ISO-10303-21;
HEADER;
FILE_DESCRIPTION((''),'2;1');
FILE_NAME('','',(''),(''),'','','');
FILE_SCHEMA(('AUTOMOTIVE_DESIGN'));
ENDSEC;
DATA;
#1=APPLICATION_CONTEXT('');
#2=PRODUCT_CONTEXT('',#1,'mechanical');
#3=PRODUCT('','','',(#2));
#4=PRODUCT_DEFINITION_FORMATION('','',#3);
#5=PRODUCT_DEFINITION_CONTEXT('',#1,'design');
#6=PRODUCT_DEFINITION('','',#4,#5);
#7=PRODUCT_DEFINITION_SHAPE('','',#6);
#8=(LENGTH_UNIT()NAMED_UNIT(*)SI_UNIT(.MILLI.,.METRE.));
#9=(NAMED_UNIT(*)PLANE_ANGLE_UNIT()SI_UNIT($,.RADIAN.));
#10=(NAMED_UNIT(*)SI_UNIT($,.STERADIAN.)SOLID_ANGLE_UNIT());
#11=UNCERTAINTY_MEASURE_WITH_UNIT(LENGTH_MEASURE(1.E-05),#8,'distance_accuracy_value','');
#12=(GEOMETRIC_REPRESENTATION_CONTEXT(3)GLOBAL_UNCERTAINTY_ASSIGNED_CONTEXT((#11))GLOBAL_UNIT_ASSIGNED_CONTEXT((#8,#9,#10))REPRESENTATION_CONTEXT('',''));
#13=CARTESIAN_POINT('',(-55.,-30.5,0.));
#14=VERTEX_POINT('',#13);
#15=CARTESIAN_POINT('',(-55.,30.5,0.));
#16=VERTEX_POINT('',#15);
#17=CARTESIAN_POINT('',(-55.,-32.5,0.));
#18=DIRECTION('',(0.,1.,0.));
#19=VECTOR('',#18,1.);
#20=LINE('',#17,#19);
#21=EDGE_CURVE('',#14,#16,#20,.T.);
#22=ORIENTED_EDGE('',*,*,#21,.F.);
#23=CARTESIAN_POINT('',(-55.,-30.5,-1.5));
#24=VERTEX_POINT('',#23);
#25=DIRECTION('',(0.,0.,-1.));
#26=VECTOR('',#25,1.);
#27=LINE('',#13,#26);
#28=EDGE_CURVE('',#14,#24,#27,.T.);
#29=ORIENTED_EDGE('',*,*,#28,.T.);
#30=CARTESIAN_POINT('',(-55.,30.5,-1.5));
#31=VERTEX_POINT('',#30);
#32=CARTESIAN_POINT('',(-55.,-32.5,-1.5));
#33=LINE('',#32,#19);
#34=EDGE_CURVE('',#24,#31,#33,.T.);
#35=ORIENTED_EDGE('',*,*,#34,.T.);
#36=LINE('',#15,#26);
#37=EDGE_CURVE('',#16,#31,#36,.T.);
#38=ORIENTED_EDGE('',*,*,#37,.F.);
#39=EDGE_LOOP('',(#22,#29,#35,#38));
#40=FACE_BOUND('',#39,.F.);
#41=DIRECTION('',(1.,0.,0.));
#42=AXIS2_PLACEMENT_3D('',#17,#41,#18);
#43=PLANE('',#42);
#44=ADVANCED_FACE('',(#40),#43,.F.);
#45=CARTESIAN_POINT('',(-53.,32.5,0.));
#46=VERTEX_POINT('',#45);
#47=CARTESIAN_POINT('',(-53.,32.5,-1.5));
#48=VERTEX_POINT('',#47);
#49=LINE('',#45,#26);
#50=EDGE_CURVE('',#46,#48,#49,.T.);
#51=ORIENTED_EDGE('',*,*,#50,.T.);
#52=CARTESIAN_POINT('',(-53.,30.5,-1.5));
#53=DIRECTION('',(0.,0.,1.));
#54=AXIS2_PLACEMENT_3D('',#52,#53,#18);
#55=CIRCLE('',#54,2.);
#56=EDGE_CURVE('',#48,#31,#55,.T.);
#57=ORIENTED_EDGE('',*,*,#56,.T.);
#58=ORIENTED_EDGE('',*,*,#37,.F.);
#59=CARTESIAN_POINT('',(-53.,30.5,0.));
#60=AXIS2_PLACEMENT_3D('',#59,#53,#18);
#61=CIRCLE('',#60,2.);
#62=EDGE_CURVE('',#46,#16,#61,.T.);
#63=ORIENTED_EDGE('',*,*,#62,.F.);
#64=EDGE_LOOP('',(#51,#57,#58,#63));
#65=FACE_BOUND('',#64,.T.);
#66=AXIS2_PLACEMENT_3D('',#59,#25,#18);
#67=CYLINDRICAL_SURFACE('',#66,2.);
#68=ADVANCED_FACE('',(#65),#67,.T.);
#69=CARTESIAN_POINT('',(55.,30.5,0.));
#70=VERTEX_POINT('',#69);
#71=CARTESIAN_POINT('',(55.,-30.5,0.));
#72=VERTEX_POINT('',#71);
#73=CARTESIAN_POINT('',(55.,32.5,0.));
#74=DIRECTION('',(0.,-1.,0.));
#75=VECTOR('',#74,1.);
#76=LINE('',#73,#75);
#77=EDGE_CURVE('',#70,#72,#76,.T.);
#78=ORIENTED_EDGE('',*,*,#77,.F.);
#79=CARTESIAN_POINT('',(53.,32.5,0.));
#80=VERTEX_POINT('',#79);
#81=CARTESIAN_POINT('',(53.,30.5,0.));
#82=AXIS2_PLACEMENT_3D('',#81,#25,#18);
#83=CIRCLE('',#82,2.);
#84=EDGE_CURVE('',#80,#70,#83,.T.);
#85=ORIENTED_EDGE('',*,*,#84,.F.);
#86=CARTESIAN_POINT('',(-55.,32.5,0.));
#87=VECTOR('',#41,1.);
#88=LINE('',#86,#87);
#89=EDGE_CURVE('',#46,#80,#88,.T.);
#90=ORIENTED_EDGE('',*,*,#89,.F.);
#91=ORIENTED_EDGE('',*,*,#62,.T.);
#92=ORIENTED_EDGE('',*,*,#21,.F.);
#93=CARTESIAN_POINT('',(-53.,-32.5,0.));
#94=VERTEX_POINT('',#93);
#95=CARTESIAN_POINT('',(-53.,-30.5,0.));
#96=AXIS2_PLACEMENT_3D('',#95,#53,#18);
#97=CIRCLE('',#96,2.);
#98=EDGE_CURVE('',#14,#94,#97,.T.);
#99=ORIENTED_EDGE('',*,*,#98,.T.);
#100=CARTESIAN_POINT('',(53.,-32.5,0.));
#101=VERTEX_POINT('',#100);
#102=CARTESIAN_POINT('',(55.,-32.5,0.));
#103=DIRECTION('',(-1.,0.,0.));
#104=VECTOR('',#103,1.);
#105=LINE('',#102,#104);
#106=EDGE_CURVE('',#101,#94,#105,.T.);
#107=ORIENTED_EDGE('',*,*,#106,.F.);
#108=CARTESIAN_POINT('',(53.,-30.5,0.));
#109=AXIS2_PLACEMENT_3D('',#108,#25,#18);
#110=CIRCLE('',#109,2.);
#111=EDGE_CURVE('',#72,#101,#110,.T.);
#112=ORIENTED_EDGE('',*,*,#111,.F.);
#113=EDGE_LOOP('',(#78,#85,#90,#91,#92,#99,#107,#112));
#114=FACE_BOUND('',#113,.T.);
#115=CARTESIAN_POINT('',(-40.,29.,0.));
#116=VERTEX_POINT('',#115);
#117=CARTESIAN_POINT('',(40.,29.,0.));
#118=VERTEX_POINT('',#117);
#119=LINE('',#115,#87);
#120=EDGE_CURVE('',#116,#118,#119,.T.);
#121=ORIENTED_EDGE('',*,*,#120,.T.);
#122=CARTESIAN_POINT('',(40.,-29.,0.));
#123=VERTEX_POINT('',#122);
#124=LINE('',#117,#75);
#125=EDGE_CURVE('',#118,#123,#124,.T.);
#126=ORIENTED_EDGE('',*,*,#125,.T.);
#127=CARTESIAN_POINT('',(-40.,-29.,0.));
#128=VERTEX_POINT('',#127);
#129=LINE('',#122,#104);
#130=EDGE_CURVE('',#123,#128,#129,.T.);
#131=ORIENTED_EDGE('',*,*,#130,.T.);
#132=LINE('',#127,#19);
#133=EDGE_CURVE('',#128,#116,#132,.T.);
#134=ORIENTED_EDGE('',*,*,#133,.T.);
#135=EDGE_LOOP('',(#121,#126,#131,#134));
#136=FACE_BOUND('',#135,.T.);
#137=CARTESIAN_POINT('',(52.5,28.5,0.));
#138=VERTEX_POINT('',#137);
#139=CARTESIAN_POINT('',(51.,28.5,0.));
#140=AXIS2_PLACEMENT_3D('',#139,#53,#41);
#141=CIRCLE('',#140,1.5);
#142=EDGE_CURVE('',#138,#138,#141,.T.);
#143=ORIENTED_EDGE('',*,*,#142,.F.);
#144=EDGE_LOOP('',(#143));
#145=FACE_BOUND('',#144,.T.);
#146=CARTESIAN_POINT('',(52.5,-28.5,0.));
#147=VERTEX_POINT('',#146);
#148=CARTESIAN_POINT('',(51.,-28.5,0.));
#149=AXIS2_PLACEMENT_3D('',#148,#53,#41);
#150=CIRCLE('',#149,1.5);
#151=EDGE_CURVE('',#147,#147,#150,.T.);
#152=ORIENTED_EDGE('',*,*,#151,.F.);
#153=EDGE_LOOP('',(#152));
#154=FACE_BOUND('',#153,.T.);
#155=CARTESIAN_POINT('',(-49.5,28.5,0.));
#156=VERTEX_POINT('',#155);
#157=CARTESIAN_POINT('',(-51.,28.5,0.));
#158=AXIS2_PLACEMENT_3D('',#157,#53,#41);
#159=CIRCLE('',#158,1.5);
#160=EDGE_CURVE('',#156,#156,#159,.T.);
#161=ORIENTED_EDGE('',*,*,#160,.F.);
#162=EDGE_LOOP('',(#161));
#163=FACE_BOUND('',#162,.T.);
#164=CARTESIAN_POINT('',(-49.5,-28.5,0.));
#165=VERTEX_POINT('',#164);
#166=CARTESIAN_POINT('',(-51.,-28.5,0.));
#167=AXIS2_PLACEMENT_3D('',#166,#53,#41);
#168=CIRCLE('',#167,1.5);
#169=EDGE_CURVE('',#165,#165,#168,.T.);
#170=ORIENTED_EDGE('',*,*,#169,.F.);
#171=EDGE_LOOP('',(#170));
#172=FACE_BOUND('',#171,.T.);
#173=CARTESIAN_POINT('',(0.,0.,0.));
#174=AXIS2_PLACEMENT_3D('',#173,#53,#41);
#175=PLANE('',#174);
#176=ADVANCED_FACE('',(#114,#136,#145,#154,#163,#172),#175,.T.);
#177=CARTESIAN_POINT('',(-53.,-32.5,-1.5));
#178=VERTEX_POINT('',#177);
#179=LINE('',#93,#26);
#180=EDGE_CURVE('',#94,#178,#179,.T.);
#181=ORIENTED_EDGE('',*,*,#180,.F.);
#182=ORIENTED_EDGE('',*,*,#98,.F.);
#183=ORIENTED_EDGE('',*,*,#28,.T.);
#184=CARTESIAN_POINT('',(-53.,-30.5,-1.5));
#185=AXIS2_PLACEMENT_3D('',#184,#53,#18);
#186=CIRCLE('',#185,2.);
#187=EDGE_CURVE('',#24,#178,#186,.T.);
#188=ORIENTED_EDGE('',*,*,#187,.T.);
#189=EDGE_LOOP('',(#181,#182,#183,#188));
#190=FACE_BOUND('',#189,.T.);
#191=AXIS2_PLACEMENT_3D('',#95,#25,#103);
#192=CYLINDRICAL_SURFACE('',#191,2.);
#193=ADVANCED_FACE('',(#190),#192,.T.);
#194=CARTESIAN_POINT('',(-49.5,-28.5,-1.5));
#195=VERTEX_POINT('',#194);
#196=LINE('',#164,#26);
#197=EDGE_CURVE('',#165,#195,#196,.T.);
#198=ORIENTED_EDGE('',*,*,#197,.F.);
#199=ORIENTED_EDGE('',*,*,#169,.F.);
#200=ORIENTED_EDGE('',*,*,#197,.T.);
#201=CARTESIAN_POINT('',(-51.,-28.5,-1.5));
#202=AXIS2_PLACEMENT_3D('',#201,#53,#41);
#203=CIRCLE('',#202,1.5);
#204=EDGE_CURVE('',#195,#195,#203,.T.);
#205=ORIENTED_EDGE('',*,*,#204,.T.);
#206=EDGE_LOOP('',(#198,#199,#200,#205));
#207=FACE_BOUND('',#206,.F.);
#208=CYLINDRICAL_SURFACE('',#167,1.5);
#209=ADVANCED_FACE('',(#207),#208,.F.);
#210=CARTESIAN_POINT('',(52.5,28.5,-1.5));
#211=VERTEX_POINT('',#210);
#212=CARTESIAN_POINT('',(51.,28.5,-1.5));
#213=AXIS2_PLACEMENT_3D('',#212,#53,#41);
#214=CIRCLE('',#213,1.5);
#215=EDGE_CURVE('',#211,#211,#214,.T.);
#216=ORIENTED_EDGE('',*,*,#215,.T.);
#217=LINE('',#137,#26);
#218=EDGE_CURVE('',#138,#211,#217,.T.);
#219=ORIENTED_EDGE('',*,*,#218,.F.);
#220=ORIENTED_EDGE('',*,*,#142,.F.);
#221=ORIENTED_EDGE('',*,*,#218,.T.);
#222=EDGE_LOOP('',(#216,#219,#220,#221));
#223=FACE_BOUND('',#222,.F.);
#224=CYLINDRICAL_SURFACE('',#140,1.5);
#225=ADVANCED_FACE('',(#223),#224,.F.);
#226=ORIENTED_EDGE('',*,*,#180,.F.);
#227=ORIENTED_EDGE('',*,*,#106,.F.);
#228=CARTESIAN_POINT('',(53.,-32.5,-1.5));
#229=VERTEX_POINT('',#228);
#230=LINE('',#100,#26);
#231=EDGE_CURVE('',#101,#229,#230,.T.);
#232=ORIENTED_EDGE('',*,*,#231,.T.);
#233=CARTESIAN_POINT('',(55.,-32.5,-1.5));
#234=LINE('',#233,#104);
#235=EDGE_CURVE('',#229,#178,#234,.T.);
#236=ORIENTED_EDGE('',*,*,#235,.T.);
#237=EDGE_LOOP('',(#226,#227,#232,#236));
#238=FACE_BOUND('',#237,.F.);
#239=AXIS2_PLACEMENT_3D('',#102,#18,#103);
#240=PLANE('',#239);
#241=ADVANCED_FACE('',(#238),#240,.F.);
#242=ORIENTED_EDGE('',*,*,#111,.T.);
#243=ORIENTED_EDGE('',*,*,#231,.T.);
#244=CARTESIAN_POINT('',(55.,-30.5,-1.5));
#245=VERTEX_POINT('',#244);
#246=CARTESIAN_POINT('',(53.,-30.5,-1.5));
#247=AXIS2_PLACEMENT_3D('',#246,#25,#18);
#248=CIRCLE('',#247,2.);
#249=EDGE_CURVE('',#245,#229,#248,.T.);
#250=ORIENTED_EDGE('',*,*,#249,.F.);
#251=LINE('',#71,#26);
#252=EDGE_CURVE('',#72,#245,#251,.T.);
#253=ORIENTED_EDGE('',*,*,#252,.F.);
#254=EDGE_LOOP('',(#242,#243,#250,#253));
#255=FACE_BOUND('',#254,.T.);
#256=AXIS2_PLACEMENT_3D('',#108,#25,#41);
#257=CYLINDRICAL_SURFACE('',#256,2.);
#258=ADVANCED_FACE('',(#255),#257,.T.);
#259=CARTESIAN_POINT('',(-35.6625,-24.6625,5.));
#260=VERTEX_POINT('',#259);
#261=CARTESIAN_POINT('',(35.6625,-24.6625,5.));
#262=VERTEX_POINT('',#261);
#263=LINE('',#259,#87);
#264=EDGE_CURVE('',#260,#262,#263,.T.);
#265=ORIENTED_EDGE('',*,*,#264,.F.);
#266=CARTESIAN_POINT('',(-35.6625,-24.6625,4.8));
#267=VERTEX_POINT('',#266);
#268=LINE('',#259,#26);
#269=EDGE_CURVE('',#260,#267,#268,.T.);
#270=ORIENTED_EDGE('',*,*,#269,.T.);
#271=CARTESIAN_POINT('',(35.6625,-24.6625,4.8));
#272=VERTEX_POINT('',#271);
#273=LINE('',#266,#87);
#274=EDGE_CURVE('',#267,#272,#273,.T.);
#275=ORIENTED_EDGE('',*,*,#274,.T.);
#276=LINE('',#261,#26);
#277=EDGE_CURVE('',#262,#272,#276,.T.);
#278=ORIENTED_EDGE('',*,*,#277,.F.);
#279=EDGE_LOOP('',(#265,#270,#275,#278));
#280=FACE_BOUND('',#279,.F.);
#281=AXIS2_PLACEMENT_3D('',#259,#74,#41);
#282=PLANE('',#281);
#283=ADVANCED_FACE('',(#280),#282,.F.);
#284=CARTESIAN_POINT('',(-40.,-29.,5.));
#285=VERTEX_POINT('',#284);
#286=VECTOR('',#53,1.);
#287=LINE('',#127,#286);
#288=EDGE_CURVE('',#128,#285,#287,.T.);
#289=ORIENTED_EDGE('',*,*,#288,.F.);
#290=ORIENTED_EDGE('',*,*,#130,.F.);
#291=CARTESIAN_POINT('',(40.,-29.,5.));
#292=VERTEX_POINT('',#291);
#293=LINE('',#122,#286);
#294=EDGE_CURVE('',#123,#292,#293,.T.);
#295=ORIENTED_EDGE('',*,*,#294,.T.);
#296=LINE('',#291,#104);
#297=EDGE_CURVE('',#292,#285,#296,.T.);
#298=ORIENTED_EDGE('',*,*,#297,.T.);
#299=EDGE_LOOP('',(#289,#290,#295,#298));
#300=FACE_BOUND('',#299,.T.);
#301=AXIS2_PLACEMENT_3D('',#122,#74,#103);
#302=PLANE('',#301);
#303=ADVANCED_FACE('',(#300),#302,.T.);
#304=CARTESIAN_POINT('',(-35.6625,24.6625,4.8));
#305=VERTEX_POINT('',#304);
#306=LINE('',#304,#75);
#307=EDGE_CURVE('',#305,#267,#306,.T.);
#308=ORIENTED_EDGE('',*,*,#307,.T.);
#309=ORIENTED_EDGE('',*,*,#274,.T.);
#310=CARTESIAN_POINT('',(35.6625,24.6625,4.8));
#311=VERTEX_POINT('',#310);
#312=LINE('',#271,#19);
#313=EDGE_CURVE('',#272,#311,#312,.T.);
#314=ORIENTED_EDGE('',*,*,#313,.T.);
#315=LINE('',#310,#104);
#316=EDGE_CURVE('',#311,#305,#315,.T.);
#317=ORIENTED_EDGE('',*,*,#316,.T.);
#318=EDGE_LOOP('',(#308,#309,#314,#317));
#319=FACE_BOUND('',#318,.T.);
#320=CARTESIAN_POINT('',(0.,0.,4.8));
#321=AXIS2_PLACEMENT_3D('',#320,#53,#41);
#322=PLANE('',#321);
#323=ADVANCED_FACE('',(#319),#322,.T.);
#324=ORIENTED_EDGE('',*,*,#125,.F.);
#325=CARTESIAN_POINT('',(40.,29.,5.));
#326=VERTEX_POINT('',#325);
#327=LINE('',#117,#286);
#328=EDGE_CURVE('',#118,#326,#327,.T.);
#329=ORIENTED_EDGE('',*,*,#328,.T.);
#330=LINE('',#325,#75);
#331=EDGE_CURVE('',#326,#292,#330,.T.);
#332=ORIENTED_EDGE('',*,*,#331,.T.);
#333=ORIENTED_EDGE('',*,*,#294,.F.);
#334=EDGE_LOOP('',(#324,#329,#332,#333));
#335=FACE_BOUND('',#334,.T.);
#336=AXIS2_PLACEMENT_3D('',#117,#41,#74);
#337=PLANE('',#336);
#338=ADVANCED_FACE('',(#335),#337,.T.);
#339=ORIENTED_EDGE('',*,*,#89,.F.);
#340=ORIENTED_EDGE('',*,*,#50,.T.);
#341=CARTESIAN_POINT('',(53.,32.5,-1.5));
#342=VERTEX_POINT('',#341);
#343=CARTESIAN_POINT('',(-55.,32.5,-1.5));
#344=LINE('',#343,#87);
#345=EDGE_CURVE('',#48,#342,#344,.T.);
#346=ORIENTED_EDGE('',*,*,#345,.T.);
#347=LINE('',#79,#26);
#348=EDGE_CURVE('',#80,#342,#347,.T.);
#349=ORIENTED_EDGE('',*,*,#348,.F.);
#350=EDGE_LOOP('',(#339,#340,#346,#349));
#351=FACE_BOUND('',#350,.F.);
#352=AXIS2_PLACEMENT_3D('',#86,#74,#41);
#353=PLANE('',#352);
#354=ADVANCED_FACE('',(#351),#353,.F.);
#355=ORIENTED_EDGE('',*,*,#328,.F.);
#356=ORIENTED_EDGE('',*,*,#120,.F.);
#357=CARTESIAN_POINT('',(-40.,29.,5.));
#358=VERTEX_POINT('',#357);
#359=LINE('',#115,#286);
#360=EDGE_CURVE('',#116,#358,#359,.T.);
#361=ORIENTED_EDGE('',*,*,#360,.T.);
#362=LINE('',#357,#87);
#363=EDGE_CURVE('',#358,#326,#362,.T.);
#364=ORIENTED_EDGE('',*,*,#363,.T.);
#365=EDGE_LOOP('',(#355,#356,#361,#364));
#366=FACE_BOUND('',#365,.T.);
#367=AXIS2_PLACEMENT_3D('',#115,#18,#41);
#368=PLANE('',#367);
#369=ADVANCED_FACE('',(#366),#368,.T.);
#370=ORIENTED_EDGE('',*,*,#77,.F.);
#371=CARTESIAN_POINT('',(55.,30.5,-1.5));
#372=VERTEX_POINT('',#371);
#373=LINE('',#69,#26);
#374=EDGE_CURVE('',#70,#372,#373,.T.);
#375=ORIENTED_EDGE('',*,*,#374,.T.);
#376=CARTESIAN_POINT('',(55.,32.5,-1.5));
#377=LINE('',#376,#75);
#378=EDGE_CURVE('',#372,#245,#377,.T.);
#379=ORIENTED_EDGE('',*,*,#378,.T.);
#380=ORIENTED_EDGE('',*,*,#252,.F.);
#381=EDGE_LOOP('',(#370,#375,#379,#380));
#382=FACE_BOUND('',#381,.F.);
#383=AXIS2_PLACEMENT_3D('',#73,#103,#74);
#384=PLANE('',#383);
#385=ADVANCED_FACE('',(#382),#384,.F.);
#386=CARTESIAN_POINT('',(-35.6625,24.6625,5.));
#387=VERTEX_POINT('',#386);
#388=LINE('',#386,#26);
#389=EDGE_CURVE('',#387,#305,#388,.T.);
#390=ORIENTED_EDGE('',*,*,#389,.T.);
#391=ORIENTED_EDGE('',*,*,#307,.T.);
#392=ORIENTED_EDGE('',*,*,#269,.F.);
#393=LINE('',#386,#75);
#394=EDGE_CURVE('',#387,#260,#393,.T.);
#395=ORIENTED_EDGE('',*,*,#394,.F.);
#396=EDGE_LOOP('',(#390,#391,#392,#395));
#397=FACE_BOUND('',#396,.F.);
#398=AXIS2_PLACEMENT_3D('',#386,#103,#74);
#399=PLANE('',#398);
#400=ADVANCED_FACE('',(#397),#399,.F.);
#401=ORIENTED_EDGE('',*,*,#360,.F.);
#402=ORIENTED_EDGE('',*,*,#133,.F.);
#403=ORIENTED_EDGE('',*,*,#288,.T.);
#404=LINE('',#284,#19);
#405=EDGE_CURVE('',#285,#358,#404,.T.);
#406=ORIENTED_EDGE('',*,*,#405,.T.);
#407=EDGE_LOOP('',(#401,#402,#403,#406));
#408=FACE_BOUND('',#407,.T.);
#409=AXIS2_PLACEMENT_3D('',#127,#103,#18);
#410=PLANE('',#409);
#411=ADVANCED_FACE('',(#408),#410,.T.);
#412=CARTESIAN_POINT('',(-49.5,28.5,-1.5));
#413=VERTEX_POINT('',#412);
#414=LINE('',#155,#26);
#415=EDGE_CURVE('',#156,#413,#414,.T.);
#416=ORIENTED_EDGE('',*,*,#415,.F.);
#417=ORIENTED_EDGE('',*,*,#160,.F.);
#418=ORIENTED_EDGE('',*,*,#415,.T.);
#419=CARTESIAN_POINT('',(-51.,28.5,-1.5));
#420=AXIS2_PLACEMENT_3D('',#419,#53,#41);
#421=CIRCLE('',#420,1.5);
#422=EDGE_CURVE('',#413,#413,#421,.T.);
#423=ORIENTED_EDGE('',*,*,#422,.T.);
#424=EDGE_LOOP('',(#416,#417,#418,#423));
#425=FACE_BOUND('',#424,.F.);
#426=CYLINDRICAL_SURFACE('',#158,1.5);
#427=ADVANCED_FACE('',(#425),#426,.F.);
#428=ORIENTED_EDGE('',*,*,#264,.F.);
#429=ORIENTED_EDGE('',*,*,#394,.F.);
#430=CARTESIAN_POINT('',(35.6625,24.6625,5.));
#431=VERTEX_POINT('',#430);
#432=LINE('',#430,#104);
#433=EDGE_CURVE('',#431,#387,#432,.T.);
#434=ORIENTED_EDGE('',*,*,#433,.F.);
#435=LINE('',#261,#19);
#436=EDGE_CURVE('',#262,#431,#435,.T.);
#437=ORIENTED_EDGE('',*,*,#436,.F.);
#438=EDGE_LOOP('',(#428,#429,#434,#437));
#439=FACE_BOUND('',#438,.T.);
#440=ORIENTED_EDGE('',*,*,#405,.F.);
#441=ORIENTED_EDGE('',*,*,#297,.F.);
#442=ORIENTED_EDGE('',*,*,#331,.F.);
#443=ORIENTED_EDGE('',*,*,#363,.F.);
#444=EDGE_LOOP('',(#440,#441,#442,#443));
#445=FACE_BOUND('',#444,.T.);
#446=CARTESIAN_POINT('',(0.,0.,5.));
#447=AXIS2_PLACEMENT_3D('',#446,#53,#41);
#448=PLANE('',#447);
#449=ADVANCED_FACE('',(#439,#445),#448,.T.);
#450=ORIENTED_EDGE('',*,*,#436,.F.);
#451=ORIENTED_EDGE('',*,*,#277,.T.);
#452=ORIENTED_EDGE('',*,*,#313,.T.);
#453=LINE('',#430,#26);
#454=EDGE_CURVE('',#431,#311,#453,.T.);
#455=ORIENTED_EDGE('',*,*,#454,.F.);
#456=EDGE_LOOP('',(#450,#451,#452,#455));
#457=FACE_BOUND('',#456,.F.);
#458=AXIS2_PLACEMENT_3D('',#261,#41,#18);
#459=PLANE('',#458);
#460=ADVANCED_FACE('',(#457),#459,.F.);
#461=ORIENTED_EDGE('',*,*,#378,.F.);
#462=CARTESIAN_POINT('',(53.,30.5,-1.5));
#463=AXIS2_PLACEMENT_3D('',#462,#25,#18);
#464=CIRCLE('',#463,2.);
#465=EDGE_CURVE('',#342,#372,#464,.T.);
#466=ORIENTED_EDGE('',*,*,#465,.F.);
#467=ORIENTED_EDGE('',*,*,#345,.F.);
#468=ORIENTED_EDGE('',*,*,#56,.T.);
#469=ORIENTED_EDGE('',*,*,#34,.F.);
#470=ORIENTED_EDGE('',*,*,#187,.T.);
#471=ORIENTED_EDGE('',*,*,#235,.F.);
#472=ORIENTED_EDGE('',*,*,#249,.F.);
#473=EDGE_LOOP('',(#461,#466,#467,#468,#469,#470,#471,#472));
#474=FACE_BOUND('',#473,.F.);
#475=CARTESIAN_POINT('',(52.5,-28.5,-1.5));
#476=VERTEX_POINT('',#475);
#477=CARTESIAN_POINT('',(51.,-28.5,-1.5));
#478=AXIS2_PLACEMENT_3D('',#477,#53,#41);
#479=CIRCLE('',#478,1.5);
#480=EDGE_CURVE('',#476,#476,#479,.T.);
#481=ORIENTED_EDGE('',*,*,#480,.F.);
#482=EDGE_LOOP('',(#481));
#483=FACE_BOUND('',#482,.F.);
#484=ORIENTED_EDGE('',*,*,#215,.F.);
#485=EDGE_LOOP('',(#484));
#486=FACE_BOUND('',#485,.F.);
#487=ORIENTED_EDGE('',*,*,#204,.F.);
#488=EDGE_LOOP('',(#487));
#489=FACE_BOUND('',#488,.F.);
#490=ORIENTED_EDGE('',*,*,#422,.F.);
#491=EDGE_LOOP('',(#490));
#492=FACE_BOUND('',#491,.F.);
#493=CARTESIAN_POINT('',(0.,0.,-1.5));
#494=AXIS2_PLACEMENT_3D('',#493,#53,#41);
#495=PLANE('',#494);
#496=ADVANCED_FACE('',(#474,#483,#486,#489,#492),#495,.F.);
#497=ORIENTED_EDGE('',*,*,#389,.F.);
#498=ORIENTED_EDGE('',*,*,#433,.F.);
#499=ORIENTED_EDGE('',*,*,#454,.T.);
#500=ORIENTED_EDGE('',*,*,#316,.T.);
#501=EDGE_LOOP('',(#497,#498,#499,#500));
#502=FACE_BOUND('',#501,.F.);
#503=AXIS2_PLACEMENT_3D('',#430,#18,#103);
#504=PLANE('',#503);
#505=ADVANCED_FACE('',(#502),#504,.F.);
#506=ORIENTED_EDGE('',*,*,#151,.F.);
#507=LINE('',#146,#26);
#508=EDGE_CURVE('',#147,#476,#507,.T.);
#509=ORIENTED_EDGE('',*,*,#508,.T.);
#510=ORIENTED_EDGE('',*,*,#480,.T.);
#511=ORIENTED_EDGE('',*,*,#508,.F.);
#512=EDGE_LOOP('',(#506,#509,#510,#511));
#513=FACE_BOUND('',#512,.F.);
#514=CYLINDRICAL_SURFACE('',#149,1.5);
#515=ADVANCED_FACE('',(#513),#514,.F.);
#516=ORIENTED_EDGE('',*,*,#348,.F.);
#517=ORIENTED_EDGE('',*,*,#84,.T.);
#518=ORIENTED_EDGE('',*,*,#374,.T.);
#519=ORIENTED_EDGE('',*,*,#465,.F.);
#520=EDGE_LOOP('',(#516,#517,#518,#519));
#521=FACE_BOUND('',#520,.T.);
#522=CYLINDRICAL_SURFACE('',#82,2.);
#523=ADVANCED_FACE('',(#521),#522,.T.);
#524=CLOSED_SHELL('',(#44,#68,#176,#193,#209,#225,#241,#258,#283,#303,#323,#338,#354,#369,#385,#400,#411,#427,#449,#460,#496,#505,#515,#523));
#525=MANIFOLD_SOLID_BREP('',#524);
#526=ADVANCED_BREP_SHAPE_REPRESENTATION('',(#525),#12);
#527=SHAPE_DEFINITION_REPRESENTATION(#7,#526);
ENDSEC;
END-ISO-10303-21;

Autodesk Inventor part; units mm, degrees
ref_plane "YZ Plane" through (0, 0, 0) normal (1, 0, 0) x (0, 1, 0)
ref_plane "XZ Plane" through (0, 0, 0) normal (0, 1, 0) x (-1, 0, 0)
ref_plane "XY Plane" through (0, 0, 0) normal (0, 0, 1) x (1, 0, 0)
sketch "TFT LCD Touch Screen" plane through (0, 0, 0) normal (0, 0, 1) x (1, 0, 0)
  line L0 (-40, 29) -> (40, 29)
  line L1 (40, 29) -> (40, -29)
  line L2 (40, -29) -> (-40, -29)
  line L3 (-40, -29) -> (-40, 29)
  line L4 (-55, 32.5) -> (55, 32.5)
  line L5 (55, 32.5) -> (55, -32.5)
  line L6 (55, -32.5) -> (-55, -32.5)
  line L7 (-55, -32.5) -> (-55, 32.5)
  circle A0 centre (-51, 28.5) radius 1.5
  circle A1 centre (-51, -28.5) radius 1.5
  circle A2 centre (51, -28.5) radius 1.5
  circle A3 centre (51, 28.5) radius 1.5
  point P0 (0.75, 3.075)
  point P1 (0, 29)
  point P2 (-40, 0)
  point P3 (0, 32.5)
  point P4 (55, 0)
  dimension "d0" = 110
  dimension "d1" = 65
  dimension "d2" = 3
  dimension "d3" = 57
  dimension "d4" = 102
  dimension "d5" = 4
  dimension "d6" = 4
  dimension "d7" = 80
  dimension "d8" = 58
sketch "Sketch1" plane through (0, 0, 0) normal (0, 0, 1) x (1, 0, 0)
  line L0 (-40, 29) -> (40, 29)
  line L1 (40, 29) -> (40, -29)
  line L2 (40, -29) -> (-40, -29)
  line L3 (-40, -29) -> (-40, 29)
  line L4 (-55, 32.5) -> (55, 32.5)
  line L5 (55, 32.5) -> (55, -32.5)
  line L6 (55, -32.5) -> (-55, -32.5)
  line L7 (-55, -32.5) -> (-55, 32.5)
  circle A0 centre (-51, 28.5) radius 1.5
  circle A1 centre (-51, -28.5) radius 1.5
  circle A2 centre (51, -28.5) radius 1.5
  circle A3 centre (51, 28.5) radius 1.5
  point P0 (0, 0)
  point P1 (-55, 0)
extrude "Extrusion1" add sketch "Sketch1" against normal blind 1.5 contours L0 L1 L2 L3 | L4 L5 L6 L7
extrude "Extrusion2" add sketch "Sketch1" along normal blind 5 contours L0 L1 L2 L3
sketch "Sketch2" plane through (0, 0, 5) normal (0, 0, 1) x (1, 0, 0)
  line L0 (-40, 29) -> (40, 29)
  line L1 (40, 29) -> (40, -29)
  line L2 (40, -29) -> (-40, -29)
  line L3 (-40, -29) -> (-40, 29)
  line L4 (35.6625, 24.6625) -> (-35.6625, 24.6625)
  line L5 (-35.6625, 24.6625) -> (-35.6625, -24.6625)
  line L6 (-35.6625, -24.6625) -> (35.6625, -24.6625)
  line L7 (35.6625, -24.6625) -> (35.6625, 24.6625)
  point P0 (0, 0)
extrude "Extrusion3" cut sketch "Sketch2" against normal blind 0.2 contours L7 L6 L5 L4
fillet "Fillet1" radius 2 4 edges at (55, 32.5, -0.75) (-55, 32.5, -0.75) (-55, -32.5, -0.75) (55, -32.5, -0.75)
equation "\"d5\" = -0.5 * d3 + 0.5 * d1"
equation "\"d6\" = -0.5 * d4 + 0.5 * d0"
properties part number "TFT Screen"
